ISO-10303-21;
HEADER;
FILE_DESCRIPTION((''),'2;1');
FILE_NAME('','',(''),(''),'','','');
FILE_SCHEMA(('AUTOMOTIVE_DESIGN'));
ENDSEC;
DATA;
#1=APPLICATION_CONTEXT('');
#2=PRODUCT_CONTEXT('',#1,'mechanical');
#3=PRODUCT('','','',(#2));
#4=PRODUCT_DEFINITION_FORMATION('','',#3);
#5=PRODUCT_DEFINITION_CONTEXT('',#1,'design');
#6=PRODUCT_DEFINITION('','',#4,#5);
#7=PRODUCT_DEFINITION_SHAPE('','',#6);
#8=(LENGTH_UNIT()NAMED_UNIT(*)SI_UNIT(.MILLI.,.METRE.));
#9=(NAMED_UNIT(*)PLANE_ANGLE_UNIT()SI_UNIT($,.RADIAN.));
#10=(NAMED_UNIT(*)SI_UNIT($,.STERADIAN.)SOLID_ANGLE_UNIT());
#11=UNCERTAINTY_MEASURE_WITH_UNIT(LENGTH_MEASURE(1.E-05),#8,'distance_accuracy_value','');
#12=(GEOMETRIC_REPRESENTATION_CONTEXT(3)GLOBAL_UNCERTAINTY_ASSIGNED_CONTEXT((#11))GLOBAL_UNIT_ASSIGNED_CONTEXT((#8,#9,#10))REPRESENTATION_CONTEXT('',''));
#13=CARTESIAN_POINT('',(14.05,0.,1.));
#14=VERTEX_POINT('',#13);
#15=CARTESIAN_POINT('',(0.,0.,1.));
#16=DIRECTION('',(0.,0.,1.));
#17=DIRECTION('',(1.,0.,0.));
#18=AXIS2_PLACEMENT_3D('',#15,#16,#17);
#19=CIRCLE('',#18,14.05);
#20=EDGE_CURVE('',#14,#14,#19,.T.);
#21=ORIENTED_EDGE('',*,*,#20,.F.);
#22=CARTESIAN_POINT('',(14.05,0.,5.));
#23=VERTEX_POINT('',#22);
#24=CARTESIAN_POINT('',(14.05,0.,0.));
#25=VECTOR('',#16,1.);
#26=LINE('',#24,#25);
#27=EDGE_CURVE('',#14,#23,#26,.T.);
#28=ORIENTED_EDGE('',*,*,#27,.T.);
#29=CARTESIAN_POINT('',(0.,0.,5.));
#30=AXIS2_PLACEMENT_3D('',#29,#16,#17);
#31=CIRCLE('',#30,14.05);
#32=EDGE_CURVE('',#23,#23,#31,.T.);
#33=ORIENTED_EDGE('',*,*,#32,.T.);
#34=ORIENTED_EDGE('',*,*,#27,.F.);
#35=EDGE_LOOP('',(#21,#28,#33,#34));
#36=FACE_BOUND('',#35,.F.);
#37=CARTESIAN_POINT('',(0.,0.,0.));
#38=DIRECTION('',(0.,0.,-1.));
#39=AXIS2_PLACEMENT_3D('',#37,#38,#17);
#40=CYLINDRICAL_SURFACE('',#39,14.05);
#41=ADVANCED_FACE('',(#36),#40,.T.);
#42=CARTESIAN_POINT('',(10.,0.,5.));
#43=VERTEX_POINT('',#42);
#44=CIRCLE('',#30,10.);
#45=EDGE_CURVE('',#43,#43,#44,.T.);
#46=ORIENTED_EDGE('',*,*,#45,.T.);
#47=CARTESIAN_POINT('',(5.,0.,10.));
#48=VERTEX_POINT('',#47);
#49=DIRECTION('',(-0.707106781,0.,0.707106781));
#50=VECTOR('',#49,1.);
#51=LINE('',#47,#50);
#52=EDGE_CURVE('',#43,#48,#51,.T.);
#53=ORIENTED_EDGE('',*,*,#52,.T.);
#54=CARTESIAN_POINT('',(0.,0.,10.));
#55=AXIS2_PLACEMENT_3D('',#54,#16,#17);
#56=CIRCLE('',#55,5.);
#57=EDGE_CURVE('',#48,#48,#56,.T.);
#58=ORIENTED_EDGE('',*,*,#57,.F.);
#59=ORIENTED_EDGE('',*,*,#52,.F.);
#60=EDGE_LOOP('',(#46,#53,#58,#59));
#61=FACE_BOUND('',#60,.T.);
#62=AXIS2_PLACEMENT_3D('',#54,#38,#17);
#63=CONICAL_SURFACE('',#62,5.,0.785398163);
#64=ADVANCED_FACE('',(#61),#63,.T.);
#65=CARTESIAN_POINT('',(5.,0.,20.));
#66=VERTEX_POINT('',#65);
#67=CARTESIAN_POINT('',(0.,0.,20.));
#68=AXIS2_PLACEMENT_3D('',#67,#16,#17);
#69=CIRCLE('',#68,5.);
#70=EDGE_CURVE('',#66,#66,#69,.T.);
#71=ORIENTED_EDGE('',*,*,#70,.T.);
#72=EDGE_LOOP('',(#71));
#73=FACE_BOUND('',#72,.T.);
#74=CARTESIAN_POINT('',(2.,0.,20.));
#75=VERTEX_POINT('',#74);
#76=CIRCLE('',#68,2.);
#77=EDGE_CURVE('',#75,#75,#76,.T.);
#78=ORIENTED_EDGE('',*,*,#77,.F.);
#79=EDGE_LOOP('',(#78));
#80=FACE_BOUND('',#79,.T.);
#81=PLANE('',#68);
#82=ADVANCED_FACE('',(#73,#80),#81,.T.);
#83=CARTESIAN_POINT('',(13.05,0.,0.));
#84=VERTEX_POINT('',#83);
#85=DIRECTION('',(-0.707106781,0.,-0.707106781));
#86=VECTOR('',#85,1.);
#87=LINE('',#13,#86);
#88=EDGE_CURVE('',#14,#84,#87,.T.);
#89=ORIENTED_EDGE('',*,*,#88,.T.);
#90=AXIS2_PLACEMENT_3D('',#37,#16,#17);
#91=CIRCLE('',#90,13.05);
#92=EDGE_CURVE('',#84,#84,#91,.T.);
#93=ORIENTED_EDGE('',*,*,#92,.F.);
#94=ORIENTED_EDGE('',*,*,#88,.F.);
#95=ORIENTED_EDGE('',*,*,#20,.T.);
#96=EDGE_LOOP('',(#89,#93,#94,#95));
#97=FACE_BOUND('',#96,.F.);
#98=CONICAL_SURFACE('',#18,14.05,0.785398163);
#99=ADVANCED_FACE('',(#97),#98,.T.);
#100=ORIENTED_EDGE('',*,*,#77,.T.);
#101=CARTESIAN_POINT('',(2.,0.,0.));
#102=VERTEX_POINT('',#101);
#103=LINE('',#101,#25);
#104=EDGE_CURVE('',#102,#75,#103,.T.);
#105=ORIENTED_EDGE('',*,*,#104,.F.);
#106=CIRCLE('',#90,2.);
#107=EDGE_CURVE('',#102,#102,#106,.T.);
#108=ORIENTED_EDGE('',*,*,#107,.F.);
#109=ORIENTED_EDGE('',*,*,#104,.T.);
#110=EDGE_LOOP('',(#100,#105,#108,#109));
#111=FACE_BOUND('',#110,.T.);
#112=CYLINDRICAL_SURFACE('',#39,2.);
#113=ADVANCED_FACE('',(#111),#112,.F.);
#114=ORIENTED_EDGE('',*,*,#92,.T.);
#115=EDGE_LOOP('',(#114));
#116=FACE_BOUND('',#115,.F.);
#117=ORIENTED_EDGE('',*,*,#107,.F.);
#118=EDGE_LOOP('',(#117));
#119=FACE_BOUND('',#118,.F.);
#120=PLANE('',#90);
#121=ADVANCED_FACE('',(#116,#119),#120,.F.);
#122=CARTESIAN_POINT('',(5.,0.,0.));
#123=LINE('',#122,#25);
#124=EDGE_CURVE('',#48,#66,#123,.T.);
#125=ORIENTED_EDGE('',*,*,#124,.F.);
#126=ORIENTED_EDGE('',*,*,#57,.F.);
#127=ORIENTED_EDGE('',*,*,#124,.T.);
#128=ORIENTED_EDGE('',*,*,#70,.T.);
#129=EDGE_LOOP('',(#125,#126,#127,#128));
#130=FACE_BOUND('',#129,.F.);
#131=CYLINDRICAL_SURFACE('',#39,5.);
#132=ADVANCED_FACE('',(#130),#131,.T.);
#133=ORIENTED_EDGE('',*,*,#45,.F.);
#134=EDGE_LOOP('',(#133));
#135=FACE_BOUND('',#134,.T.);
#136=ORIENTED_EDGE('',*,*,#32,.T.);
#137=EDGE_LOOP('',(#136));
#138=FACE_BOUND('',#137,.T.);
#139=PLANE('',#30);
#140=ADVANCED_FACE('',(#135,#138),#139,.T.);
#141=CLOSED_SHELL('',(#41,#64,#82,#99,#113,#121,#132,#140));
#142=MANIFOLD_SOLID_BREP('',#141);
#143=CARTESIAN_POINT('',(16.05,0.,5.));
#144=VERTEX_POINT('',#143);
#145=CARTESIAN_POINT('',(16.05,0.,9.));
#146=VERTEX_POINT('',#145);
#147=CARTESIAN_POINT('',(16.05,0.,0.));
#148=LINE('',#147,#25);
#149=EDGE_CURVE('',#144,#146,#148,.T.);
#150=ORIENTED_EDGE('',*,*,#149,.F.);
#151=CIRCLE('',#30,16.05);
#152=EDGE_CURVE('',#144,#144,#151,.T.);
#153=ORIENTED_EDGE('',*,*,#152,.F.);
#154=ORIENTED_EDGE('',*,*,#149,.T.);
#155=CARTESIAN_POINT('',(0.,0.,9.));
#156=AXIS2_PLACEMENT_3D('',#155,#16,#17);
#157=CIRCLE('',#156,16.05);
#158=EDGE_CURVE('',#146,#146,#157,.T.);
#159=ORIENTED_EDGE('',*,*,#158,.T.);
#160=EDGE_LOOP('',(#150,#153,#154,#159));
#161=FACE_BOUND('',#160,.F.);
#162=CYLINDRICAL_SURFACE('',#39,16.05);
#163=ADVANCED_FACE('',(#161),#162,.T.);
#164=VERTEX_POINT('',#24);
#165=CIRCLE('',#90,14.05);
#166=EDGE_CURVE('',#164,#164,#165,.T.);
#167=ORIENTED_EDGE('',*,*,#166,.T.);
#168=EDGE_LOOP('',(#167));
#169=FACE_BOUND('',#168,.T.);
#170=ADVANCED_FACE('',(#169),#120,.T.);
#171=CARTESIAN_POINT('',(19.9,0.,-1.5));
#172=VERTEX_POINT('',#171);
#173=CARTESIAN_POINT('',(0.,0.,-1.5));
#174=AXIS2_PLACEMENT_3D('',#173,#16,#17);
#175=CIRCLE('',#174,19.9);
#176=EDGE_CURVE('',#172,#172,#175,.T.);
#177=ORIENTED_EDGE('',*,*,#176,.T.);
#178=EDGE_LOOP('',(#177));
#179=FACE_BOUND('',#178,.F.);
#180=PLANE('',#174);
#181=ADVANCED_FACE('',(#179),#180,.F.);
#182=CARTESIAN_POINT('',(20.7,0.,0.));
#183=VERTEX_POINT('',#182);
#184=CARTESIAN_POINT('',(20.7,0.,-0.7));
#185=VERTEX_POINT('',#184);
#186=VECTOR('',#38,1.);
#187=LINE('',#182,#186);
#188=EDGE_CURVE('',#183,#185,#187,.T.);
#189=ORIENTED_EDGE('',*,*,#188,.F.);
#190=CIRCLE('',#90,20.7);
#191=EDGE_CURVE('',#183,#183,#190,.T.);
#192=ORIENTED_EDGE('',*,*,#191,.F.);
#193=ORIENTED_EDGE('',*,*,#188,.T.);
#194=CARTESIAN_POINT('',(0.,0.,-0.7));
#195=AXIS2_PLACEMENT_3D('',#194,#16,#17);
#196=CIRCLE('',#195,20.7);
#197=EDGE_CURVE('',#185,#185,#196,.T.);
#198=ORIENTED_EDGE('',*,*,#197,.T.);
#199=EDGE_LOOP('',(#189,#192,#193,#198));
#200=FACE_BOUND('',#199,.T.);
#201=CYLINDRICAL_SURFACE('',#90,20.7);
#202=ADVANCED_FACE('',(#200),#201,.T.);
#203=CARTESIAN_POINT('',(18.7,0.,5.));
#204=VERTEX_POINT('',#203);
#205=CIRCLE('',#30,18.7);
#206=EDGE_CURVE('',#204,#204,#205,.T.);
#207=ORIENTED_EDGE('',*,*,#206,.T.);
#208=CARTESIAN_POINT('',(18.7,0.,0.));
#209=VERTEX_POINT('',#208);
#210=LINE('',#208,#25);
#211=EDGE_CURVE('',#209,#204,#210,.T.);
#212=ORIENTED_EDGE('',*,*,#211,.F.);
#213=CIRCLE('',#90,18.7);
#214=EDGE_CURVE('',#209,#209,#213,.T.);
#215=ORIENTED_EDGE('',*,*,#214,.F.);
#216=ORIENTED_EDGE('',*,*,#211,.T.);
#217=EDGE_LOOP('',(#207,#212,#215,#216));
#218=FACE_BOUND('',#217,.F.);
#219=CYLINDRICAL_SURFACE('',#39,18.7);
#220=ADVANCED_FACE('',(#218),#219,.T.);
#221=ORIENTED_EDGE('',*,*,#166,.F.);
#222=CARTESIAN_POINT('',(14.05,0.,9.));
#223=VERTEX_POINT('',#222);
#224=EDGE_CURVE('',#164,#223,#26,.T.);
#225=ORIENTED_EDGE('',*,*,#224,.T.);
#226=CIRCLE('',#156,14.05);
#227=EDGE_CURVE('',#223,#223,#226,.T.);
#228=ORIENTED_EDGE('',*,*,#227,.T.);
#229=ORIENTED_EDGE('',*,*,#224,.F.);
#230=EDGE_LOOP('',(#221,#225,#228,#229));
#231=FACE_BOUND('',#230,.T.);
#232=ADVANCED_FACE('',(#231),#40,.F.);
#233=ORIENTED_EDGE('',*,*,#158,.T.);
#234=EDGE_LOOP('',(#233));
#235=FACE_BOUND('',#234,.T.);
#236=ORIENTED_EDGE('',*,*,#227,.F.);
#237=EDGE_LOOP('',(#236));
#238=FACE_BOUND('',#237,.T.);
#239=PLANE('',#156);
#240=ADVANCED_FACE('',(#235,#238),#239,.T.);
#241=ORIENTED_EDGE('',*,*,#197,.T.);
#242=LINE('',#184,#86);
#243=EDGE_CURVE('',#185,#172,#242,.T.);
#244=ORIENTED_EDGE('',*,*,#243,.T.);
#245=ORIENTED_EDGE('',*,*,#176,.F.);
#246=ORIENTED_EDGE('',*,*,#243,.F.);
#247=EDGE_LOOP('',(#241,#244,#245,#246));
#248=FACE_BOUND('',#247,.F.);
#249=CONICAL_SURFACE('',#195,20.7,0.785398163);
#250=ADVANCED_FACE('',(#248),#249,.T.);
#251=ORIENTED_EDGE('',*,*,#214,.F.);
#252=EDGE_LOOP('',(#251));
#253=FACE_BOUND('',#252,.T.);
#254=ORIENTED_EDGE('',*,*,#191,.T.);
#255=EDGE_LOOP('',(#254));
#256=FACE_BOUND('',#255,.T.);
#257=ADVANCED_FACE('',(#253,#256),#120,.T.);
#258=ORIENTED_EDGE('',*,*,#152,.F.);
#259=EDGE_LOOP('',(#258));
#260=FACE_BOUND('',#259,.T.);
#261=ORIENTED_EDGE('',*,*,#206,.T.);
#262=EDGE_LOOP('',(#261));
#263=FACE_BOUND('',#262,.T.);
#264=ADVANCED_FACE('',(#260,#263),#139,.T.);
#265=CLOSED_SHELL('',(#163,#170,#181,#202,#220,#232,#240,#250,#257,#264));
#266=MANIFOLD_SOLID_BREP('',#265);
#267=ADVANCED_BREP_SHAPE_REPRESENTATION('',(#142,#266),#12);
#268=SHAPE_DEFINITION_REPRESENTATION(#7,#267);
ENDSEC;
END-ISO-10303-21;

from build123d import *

# Parameters (mm, degrees)
F0_R     = 20.7
F0_R_2   = 18.7
F0_R_3   = 16.05
F0_R_4   = 14.05
F0_R_5   = 5
F0_R_6   = 2
F1_DEPTH = 1.5
F2_DEPTH = 9
F3_DEPTH = 5
F4_SIZE  = 0.8
F5_DEPTH = 20
F6_DEPTH = 5
F7_SIZE  = 1
F8_SIZE  = 5


with BuildPart() as f1:
    # F0 (on Top) → F1 (new body)
    with BuildSketch(Plane.XY):
        Circle(F0_R)
        Circle(F0_R_2, mode=Mode.SUBTRACT)
        Circle(F0_R_2)
        Circle(F0_R_3, mode=Mode.SUBTRACT)
        Circle(F0_R_3)
        Circle(F0_R_4, mode=Mode.SUBTRACT)
        Circle(F0_R_4)
        Circle(F0_R_5, mode=Mode.SUBTRACT)
        Circle(F0_R_5)
        Circle(F0_R_6, mode=Mode.SUBTRACT)
        Circle(F0_R_6)
    extrude(amount=-F1_DEPTH)

    # F0 (on Top) → F2 (join)
    with BuildSketch(Plane.XY):
        Circle(F0_R_3)
        Circle(F0_R_4, mode=Mode.SUBTRACT)
    extrude(amount=F2_DEPTH)

    # F0 (on Top) → F3 (join)
    with BuildSketch(Plane.XY):
        Circle(F0_R_2)
        Circle(F0_R_3, mode=Mode.SUBTRACT)
    extrude(amount=F3_DEPTH)

    # F4
    f4_edges = [f1.edges().sort_by_distance(p)[0] for p in [
        (-20.7, 0, -1.5),
    ]]
    chamfer(f4_edges, length=F4_SIZE)


with BuildPart() as f5:
    # F0 (on Top) → F5 (new body)
    with BuildSketch(Plane.XY):
        Circle(F0_R_5)
        Circle(F0_R_6, mode=Mode.SUBTRACT)
    extrude(amount=F5_DEPTH)

    # F0 (on Top) → F6 (join)
    with BuildSketch(Plane.XY):
        Circle(F0_R_4)
        Circle(F0_R_5, mode=Mode.SUBTRACT)
    extrude(amount=F6_DEPTH)

    # F7
    f7_edges = [f5.edges().sort_by_distance(p)[0] for p in [
        (-14.05, 0, 0),
    ]]
    chamfer(f7_edges, length=F7_SIZE)

    # F8
    f8_edges = [f5.edges().sort_by_distance(p)[0] for p in [
        (-5, 0, 5),
    ]]
    chamfer(f8_edges, length=F8_SIZE)


solid = Compound([f1.part, f5.part])
